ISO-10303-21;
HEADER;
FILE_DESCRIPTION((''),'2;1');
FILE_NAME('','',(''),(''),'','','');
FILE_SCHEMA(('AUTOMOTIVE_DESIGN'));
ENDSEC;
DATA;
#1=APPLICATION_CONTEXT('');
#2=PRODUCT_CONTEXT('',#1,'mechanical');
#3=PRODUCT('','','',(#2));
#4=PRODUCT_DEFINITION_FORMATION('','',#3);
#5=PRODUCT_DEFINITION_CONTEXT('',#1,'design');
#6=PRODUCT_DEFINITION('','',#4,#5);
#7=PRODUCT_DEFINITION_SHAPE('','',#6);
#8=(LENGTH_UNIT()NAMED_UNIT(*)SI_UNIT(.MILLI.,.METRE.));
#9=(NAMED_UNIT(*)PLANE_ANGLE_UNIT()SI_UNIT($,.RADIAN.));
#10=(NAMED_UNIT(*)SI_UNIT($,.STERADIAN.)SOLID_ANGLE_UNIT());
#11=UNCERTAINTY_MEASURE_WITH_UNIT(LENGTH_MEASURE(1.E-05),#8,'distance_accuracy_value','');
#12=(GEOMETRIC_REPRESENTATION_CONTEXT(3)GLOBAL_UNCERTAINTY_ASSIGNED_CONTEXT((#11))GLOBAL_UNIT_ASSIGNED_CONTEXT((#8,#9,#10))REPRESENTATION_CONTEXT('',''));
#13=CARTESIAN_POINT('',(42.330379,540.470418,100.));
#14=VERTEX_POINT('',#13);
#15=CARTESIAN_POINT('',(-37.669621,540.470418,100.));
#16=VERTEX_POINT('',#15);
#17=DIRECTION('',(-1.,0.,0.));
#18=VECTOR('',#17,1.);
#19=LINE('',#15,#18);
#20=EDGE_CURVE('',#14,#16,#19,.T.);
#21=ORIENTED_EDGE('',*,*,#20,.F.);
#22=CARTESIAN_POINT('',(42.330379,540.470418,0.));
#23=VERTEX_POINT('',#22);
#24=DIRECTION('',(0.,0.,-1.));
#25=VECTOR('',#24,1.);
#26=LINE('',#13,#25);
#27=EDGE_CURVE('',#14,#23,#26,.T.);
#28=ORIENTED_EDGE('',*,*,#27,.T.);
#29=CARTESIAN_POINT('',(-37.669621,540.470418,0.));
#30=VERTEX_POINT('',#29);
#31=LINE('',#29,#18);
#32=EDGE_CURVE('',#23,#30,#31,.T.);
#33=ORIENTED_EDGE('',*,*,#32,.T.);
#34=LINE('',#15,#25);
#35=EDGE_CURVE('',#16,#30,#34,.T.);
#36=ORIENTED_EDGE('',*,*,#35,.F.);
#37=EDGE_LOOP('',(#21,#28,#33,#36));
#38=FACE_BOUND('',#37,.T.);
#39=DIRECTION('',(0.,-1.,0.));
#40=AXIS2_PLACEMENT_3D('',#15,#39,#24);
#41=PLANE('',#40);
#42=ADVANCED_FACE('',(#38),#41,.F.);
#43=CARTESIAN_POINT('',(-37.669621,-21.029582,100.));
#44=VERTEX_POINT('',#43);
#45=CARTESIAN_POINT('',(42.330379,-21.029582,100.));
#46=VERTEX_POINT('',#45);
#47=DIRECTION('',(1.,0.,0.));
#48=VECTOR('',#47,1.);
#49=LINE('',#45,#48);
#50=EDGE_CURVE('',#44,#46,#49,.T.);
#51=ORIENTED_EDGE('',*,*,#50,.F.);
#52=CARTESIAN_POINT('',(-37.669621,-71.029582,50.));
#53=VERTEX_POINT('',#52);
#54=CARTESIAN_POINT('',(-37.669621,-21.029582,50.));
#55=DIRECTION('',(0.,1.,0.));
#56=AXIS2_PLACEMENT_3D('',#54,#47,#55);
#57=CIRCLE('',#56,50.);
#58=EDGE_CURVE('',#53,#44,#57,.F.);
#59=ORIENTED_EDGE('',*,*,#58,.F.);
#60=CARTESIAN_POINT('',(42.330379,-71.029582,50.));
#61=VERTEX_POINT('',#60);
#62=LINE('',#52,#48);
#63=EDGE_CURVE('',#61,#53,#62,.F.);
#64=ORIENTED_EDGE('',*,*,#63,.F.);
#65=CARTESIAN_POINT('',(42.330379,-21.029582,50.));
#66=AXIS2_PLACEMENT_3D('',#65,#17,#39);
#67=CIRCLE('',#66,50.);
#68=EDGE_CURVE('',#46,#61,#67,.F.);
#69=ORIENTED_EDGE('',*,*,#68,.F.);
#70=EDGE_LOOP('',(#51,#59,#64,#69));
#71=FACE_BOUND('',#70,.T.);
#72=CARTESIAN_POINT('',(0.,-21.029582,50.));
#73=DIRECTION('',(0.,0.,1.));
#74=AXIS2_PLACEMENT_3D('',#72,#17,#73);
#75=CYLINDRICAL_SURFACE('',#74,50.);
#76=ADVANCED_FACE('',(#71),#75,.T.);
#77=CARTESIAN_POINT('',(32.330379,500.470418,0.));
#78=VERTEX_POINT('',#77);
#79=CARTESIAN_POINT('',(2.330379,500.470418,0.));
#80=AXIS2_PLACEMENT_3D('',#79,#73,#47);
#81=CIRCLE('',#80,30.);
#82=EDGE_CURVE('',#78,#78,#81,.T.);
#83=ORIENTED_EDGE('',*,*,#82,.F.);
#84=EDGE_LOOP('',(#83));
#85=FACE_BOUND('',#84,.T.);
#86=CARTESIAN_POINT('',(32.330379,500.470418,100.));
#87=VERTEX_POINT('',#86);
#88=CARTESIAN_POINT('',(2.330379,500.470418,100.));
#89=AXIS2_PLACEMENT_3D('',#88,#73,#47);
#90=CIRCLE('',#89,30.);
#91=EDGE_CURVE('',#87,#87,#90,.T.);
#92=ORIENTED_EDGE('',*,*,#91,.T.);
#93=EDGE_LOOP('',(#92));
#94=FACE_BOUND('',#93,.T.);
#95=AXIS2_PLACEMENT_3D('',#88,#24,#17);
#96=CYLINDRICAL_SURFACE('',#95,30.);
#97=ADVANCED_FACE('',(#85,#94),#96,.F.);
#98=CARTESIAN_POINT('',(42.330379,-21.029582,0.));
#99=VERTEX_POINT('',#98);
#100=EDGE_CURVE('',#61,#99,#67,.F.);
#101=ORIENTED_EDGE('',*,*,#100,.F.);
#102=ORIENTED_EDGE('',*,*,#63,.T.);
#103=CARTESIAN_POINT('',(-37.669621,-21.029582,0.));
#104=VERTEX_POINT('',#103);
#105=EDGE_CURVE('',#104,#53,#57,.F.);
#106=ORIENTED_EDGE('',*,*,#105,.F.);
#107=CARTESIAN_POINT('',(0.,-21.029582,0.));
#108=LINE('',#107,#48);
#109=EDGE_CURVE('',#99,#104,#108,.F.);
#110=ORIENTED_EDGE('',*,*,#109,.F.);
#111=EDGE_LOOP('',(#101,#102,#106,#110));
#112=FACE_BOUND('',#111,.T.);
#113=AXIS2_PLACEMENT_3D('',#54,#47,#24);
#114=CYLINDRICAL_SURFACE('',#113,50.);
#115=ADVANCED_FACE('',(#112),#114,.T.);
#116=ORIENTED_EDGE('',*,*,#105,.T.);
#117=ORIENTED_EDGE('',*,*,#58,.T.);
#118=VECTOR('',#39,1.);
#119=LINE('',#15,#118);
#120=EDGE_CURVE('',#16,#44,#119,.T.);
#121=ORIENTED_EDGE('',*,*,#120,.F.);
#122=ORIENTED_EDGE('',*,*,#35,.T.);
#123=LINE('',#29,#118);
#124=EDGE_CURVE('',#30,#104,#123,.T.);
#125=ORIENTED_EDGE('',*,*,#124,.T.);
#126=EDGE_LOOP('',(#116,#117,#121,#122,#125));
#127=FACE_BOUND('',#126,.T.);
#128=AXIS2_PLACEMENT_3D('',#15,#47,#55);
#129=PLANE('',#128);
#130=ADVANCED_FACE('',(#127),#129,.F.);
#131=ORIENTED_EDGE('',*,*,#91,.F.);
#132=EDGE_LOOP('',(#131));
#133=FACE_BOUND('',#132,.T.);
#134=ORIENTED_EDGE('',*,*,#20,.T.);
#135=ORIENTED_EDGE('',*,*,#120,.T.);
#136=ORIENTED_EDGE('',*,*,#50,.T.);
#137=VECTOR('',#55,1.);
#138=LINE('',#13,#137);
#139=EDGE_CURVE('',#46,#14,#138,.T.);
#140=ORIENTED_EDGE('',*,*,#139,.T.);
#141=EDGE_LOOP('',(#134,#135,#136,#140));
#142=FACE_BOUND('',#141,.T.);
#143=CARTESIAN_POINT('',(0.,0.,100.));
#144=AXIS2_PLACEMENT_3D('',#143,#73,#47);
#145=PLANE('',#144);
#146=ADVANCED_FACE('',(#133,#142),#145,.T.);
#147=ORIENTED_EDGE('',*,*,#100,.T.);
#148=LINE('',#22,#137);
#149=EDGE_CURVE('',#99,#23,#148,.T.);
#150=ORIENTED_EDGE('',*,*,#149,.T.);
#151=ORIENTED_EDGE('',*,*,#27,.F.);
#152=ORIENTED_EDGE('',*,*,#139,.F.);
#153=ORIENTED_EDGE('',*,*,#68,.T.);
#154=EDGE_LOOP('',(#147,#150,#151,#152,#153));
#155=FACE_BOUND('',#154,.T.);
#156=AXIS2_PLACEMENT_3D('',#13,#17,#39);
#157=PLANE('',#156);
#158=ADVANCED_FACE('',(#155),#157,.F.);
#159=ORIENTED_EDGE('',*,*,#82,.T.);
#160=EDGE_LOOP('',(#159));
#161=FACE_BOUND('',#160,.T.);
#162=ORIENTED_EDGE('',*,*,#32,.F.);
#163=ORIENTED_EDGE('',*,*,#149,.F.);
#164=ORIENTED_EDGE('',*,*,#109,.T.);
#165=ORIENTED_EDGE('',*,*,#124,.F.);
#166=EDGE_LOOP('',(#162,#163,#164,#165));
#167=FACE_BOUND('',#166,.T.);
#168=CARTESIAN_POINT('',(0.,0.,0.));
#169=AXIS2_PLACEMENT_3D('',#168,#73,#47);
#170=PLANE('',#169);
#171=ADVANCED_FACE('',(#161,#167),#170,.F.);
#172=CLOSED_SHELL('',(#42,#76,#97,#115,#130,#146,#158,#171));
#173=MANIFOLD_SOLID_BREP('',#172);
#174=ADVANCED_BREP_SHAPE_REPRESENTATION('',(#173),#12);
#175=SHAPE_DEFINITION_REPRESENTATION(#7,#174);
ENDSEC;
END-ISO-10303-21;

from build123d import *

# Parameters (mm, degrees)
SKETCH1_W           = 80
SKETCH1_H           = 611.5
SKETCH1_R           = 30
BOSS_EXTRUDE1_DEPTH = 100
FILLET2_R           = 50


with BuildPart() as part:
    # Sketch1 → Boss-Extrude1 (new body)
    with BuildSketch(Plane.XY):
        with Locations((2.330379174, 234.720418357)):
            Rectangle(SKETCH1_W, SKETCH1_H)
        with Locations((2.330379174, 500.470418357)):
            Circle(SKETCH1_R, mode=Mode.SUBTRACT)
    extrude(amount=BOSS_EXTRUDE1_DEPTH)

    # Fillet2
    fillet2_edges = [part.edges().sort_by_distance(p)[0] for p in [
        (2.330379174, -71.029581643, 0),
        (2.330379174, -71.029581643, 100),
    ]]
    fillet(fillet2_edges, radius=FILLET2_R - 0.0001)  # a hair under: the kernel refuses the full size


solid = part.part
